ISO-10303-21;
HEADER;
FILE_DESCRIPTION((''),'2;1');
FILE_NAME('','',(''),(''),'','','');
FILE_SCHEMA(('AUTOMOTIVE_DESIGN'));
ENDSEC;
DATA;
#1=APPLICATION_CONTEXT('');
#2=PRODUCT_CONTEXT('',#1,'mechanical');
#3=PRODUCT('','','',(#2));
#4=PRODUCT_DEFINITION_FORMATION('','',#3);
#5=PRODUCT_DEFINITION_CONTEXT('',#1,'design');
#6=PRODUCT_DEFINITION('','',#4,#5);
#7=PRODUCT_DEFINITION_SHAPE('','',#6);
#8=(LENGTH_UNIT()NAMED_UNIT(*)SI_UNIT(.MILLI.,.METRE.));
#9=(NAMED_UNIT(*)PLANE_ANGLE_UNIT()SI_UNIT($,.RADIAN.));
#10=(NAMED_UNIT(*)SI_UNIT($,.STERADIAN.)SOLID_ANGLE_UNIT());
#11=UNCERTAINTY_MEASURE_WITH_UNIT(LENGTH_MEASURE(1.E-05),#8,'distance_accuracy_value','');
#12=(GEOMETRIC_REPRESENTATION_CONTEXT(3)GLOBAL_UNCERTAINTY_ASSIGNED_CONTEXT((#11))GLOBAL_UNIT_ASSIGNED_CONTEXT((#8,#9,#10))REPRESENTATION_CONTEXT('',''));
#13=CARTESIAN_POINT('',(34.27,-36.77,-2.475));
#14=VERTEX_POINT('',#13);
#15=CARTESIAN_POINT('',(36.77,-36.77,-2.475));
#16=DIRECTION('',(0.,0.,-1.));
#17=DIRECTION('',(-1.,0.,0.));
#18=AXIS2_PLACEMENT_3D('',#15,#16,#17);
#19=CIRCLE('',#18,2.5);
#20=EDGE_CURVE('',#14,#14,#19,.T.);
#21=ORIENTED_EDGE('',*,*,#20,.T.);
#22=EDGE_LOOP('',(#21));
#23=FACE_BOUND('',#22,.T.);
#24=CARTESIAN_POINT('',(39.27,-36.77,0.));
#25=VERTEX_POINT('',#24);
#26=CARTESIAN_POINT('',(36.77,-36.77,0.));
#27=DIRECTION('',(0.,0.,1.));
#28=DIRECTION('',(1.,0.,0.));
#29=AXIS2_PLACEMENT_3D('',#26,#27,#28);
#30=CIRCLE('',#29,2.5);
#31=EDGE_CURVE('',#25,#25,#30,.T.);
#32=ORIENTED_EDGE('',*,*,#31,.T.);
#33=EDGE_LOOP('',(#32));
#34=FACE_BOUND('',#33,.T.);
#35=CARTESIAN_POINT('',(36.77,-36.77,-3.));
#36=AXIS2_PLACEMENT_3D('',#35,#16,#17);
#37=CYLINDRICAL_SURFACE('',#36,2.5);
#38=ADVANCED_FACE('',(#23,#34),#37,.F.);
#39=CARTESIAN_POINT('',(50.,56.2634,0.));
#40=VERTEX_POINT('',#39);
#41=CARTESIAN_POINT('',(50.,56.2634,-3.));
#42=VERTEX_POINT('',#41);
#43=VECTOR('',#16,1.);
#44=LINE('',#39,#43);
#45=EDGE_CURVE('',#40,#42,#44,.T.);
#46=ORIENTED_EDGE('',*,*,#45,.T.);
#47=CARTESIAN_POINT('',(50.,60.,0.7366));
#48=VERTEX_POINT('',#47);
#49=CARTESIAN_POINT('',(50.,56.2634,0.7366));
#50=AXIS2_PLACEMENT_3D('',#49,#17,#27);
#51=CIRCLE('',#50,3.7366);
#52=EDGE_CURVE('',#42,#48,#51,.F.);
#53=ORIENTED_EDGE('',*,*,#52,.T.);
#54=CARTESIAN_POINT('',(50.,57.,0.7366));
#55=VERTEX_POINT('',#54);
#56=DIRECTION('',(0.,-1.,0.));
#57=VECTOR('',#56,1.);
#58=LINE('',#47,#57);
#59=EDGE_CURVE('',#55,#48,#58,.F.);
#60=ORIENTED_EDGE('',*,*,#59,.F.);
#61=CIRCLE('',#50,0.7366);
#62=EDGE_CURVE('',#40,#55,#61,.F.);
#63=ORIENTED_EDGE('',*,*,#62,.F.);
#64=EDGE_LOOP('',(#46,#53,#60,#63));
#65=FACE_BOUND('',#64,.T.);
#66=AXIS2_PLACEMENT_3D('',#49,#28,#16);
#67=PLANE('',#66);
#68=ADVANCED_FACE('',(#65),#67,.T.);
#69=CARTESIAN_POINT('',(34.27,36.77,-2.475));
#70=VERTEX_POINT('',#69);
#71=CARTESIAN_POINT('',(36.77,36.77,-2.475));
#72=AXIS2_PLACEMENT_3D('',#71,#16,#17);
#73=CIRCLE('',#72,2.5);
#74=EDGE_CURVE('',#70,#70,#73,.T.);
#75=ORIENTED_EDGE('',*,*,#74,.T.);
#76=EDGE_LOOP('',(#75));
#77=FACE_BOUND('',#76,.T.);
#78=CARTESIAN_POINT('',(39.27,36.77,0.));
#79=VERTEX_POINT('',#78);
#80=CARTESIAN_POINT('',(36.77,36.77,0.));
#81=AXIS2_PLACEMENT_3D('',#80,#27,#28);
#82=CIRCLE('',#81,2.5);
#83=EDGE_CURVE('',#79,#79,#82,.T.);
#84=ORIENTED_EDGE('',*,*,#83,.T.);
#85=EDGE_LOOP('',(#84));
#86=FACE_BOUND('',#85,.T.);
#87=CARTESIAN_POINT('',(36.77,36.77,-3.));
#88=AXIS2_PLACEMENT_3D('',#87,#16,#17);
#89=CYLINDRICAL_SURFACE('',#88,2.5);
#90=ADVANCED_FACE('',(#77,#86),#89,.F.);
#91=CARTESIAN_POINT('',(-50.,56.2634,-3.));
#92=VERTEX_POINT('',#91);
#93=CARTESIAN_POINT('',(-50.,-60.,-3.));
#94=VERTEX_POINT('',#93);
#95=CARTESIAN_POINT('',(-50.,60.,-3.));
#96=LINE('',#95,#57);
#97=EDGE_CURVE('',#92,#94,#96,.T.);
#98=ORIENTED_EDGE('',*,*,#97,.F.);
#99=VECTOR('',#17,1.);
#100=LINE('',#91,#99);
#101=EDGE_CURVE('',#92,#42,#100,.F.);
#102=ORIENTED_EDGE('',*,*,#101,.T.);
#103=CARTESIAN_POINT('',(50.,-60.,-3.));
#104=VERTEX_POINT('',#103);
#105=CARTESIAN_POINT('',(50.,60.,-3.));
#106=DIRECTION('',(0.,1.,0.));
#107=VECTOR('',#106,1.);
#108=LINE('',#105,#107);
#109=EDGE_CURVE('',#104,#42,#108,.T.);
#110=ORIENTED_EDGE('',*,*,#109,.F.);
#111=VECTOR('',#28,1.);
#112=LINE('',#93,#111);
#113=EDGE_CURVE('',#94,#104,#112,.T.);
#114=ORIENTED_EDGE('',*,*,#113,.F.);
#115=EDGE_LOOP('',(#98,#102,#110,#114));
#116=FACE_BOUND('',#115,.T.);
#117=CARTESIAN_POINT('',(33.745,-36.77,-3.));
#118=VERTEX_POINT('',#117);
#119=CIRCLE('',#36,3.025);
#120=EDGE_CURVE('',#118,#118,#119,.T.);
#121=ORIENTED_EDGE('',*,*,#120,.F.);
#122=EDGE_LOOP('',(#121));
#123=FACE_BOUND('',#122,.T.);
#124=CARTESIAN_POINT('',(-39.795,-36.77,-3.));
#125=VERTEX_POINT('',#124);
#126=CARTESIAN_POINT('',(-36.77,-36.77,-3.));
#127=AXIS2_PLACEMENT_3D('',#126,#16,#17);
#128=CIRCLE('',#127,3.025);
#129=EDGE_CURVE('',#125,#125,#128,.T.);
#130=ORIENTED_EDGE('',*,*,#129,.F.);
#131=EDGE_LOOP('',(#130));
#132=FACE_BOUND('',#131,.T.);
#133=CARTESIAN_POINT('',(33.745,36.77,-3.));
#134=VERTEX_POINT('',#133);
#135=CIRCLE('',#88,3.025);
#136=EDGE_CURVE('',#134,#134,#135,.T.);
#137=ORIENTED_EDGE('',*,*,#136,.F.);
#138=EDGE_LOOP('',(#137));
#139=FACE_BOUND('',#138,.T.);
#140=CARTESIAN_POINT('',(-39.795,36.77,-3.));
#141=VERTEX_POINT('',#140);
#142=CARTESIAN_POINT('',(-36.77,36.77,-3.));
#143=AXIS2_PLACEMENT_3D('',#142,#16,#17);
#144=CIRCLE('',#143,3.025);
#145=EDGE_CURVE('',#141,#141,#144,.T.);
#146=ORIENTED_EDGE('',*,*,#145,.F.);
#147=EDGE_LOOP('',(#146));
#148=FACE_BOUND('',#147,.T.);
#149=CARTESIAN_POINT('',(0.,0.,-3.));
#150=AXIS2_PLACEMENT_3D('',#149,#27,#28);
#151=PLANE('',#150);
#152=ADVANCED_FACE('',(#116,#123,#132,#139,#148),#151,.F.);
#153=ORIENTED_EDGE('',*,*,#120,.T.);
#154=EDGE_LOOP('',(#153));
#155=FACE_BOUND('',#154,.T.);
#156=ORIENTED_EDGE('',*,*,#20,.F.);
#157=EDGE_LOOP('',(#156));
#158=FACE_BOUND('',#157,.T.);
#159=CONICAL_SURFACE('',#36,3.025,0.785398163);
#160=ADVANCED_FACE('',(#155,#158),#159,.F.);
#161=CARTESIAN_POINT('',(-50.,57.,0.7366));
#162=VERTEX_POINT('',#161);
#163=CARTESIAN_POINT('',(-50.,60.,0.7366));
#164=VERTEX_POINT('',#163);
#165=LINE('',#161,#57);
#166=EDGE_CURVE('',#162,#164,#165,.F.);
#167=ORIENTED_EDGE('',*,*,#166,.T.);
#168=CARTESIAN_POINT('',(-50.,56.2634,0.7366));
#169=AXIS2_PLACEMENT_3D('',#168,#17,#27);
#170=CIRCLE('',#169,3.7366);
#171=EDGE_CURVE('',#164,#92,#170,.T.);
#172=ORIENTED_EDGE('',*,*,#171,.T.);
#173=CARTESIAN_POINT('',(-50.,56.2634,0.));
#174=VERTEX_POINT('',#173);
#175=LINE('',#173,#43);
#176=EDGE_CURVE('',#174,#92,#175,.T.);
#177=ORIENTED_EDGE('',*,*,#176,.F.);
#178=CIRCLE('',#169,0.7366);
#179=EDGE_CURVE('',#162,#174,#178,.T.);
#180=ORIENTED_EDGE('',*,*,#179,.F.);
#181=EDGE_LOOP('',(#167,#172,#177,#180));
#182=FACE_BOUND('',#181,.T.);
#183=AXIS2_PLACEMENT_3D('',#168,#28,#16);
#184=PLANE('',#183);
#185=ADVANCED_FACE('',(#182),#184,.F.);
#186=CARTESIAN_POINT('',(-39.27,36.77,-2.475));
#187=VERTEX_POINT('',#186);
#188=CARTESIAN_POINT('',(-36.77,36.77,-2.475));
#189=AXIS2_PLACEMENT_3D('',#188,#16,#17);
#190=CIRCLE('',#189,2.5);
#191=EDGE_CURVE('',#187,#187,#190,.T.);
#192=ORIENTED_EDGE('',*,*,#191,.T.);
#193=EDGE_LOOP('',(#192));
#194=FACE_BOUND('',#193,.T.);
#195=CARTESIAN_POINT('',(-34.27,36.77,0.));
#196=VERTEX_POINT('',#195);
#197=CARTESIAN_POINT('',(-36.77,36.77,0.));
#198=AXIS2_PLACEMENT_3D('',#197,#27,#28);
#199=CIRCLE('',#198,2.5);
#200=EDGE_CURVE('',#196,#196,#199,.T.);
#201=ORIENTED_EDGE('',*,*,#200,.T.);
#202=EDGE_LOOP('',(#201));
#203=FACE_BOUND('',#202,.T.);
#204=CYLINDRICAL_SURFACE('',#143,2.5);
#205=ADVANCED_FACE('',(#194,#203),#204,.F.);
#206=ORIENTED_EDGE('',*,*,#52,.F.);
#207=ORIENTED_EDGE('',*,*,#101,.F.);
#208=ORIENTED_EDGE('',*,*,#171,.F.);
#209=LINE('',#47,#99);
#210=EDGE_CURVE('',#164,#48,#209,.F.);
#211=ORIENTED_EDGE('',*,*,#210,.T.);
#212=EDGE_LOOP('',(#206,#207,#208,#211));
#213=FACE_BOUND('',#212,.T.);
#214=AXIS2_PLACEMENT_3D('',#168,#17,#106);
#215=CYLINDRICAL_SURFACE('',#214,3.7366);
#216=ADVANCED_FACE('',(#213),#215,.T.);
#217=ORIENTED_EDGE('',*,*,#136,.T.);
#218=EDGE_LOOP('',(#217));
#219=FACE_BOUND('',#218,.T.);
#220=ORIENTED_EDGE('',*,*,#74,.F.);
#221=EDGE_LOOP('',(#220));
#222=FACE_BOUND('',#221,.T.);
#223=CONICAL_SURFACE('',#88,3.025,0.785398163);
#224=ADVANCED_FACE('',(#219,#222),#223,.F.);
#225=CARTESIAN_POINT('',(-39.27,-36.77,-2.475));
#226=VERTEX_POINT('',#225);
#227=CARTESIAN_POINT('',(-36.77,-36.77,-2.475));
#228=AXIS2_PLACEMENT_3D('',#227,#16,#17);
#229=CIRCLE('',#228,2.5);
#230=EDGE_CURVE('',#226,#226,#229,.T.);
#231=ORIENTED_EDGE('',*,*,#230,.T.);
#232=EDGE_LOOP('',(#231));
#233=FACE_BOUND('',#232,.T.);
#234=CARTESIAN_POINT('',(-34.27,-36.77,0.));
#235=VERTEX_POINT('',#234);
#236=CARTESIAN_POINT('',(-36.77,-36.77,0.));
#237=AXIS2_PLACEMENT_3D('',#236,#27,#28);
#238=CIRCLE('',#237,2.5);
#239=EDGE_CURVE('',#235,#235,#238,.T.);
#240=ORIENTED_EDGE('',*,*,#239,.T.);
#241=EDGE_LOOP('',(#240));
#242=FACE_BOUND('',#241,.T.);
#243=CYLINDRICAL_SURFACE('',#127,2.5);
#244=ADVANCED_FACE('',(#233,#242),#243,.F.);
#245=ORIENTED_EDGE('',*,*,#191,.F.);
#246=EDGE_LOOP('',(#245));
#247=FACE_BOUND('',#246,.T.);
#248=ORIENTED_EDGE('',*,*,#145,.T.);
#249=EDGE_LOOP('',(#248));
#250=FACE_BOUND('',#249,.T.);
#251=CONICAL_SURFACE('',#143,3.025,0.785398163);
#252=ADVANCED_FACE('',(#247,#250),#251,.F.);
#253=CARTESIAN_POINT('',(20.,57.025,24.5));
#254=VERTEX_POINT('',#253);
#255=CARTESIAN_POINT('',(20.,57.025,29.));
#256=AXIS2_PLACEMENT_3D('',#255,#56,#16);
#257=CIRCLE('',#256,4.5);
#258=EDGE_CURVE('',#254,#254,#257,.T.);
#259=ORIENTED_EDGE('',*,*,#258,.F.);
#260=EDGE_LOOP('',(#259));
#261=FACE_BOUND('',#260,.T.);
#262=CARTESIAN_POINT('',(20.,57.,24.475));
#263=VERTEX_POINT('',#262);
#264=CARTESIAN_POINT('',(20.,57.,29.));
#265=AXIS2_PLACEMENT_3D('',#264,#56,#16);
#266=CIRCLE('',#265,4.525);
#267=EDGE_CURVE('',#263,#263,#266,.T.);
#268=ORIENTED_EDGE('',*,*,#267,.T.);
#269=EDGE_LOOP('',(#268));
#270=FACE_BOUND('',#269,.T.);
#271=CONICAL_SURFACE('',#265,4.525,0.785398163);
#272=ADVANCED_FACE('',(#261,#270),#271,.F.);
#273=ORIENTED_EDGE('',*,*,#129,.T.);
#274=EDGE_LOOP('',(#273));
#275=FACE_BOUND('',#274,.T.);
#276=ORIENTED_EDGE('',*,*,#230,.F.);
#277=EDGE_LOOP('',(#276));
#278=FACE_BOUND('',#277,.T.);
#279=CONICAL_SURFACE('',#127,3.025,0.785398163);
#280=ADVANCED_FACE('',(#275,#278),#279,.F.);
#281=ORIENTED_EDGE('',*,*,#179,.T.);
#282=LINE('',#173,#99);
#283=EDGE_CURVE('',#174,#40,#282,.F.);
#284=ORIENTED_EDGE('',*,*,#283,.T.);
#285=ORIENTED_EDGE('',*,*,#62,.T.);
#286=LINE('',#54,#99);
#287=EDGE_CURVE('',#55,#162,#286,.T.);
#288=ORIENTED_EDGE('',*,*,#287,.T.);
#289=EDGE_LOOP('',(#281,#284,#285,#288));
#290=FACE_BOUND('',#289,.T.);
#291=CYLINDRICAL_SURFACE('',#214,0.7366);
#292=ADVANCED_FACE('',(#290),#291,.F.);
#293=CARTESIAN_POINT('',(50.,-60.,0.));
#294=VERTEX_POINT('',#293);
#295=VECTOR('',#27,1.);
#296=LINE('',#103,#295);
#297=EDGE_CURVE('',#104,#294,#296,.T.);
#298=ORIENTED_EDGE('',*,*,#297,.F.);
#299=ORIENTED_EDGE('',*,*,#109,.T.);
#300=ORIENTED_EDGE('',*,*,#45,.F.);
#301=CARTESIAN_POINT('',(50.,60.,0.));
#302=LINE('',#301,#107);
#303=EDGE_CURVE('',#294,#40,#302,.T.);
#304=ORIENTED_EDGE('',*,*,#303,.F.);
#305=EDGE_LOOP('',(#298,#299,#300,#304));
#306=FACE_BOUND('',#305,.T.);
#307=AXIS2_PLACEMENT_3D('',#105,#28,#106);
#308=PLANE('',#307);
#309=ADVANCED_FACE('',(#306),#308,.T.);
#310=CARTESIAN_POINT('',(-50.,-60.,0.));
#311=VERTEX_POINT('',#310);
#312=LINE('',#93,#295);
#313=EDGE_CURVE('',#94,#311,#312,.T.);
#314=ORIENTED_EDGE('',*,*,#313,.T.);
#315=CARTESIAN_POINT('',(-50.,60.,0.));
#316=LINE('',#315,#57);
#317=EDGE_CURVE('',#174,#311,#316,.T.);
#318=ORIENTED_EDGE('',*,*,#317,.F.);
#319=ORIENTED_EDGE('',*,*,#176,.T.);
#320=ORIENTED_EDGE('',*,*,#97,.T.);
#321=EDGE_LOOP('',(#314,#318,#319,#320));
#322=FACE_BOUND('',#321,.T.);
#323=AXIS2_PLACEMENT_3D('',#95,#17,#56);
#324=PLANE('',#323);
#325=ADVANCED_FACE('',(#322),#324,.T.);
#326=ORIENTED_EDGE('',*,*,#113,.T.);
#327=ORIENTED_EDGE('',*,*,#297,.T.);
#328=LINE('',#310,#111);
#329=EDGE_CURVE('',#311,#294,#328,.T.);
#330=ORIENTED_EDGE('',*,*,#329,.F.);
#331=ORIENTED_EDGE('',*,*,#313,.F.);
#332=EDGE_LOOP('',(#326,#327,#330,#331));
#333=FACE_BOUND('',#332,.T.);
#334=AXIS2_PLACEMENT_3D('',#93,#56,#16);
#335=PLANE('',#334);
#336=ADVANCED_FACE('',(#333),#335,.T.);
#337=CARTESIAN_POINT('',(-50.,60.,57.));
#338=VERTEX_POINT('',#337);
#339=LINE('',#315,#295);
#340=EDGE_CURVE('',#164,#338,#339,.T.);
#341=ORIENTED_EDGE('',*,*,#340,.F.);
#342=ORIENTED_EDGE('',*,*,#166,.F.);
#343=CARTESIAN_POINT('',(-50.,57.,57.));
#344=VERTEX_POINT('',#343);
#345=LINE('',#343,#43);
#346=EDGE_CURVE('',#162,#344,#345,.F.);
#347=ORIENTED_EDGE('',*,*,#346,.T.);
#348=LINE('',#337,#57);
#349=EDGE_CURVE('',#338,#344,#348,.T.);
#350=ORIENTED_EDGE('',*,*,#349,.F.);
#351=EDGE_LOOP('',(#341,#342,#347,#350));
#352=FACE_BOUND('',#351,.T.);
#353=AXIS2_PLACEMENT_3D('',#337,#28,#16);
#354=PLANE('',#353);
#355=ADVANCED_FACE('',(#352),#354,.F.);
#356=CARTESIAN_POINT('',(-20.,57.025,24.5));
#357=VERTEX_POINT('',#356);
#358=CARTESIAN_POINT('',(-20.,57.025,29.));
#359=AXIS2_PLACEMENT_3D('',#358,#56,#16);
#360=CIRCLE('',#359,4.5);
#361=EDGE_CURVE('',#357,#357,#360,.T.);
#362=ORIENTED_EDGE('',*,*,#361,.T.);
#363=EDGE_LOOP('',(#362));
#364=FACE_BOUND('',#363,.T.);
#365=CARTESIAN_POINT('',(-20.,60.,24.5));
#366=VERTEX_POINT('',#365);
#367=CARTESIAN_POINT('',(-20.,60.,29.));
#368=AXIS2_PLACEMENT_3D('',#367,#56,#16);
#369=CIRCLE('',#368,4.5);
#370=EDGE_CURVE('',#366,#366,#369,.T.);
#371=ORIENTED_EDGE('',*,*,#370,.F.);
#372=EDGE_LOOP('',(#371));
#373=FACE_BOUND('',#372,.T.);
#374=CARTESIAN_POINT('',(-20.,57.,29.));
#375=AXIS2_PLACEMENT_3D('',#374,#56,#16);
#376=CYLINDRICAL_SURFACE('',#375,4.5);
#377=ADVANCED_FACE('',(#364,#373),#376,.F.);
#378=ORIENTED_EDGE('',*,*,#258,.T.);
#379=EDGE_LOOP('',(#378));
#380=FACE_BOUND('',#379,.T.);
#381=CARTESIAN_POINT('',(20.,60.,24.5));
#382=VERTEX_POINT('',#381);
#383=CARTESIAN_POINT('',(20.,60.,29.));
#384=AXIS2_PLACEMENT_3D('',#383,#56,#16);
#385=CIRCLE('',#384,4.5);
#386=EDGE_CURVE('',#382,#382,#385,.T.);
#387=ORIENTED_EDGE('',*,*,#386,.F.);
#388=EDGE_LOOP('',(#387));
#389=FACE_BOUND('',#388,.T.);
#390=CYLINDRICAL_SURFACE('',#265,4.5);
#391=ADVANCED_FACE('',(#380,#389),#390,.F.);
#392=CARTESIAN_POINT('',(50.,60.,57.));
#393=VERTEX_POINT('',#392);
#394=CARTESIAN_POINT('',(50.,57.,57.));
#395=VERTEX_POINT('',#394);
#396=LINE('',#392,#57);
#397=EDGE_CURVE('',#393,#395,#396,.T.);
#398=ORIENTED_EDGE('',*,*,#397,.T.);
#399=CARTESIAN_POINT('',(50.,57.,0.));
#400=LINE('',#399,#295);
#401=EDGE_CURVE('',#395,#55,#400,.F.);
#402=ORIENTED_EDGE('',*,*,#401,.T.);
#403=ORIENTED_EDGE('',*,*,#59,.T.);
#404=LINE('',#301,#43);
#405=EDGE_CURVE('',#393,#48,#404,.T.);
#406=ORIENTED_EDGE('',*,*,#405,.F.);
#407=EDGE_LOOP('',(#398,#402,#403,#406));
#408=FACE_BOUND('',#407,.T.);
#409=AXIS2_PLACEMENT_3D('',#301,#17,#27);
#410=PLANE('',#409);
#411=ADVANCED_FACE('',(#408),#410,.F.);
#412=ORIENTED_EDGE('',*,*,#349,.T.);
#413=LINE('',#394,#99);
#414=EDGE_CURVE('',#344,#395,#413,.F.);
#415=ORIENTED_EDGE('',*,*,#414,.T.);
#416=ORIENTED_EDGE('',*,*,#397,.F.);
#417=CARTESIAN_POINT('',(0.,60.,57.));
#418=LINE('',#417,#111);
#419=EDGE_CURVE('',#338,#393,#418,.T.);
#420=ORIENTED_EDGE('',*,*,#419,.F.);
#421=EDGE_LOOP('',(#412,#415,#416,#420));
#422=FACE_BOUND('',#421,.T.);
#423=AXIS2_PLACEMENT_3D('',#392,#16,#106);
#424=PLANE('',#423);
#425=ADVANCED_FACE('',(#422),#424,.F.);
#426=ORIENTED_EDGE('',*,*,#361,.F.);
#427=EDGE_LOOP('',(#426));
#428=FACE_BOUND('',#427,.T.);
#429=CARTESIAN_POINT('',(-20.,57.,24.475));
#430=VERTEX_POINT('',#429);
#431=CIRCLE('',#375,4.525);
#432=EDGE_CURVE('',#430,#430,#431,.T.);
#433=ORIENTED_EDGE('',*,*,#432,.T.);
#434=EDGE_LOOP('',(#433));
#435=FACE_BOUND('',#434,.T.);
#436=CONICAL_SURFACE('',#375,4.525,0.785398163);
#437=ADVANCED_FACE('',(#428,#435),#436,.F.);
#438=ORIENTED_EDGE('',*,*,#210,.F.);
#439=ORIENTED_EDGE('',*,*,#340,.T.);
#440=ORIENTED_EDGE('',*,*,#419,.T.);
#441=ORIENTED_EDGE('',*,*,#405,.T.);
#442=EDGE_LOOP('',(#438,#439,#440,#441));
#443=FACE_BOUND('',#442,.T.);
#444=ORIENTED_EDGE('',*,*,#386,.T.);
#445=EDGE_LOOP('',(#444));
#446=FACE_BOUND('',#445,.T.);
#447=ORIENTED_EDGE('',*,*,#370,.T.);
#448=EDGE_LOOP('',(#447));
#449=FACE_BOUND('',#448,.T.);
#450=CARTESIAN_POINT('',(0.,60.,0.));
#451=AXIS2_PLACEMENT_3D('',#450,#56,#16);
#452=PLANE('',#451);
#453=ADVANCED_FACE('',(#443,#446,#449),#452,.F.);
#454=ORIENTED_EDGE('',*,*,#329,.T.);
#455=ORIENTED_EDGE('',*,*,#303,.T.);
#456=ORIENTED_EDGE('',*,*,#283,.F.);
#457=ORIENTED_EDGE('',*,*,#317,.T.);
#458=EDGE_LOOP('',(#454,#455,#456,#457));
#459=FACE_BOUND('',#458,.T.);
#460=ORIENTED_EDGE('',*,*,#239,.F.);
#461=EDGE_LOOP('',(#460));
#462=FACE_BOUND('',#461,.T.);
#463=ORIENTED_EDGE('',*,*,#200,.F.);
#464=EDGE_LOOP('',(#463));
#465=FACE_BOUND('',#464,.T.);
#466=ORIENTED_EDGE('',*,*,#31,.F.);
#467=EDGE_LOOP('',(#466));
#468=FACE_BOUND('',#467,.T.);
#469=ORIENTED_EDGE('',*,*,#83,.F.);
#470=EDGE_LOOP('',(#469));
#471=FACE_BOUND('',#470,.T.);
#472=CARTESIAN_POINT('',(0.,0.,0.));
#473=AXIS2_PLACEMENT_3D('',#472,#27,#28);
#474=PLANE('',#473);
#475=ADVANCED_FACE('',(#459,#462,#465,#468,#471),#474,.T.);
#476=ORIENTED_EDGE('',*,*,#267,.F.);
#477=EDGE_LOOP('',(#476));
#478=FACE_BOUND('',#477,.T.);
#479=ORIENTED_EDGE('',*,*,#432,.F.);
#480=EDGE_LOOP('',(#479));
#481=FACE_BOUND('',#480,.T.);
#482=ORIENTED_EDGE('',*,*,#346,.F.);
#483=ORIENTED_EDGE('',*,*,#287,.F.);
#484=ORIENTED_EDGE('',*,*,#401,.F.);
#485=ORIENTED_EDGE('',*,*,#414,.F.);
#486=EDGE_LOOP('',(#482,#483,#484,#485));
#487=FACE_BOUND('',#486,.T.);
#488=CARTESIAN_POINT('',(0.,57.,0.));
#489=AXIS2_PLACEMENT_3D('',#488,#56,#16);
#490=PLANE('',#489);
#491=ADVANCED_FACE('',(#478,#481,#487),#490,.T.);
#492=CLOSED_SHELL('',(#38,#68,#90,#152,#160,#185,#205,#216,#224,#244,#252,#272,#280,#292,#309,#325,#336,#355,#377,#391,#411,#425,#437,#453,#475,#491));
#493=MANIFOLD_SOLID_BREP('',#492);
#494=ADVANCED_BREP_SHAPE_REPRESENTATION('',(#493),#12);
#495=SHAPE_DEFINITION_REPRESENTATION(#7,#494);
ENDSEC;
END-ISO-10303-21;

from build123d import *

# Parameters (mm, degrees)
SKETCH_1_W                       = 100
SKETCH_1_H                       = 120
SM_BASE_FLANGE_1_DEPTH           = 3
SM_EDGE_FLANGE_1_STRIP_W         = 13.4732
SM_EDGE_FLANGE_1_STRIP_H         = 3
SM_EDGE_FLANGE_1_STRIP_CUT_DEPTH = 100
SM_EDGE_FLANGE_1_DEPTH           = 100
HOLE_WIZARD_M6_2_D               = 5
HOLE_WIZARD_M6_2_DEPTH           = 15
HOLE_WIZARD_M6_2_CSINK_D         = 6.05
HOLE_WIZARD_M6_2_CSINK_ANGLE     = 90
HOLE_WIZARD_M6_2_TIP             = 1.502151548
HOLE_WIZARD_M8_1_D               = 9
HOLE_WIZARD_M8_1_DEPTH           = 15
HOLE_WIZARD_M8_1_CSINK_D         = 9.05
HOLE_WIZARD_M8_1_CSINK_ANGLE     = 90
HOLE_WIZARD_M8_1_TIP             = 2.703872786


# Sheet-metal steps are written as plain solids
with BuildPart() as part:
    # Sketch 1 → 基体-法兰1 (new body)
    with BuildSketch(Plane.XY):
        Rectangle(SKETCH_1_W, SKETCH_1_H)
    extrude(amount=-SM_BASE_FLANGE_1_DEPTH)

    # 边线-法兰1 strip (across the edge) → 边线-法兰1 strip cut (cut)
    with BuildSketch(Plane(origin=(50, 60, 0), x_dir=(0, -1, 0), z_dir=(-1, 0, 0))):
        with Locations((-3, -1.5)):
            Rectangle(SM_EDGE_FLANGE_1_STRIP_W, SM_EDGE_FLANGE_1_STRIP_H)
    extrude(amount=SM_EDGE_FLANGE_1_STRIP_CUT_DEPTH, mode=Mode.SUBTRACT)

    # 边线-法兰1 section (across the edge) → 边线-法兰1 (add)
    with BuildSketch(Plane(origin=(50, 60, 0), x_dir=(0, -1, 0), z_dir=(-1, 0, 0))):
        with BuildLine():
            Line((0, 0.7366), (0, 57))
            Line((0, 57), (3, 57))
            Line((3, 57), (3, 0.7366))
            ThreePointArc((3, 0.7366), (3.215745145, 0.215745145), (3.7366, 0))
            Line((3.7366, 0), (3.7366, -3))
            ThreePointArc((3.7366, -3), (1.094424801, -1.905575199), (0, 0.7366))
        make_face()
    extrude(amount=SM_EDGE_FLANGE_1_DEPTH)

    # M6 螺纹孔2
    with Locations(Plane(origin=(0, 0, -3), x_dir=(-1, 0, 0), z_dir=(0, 0, -1))):
        with Locations((-36.77, 36.77), (36.77, 36.77), (36.77, -36.77), (-36.77, -36.77)):
            CounterSinkHole(HOLE_WIZARD_M6_2_D / 2, HOLE_WIZARD_M6_2_CSINK_D / 2, depth=HOLE_WIZARD_M6_2_DEPTH, counter_sink_angle=HOLE_WIZARD_M6_2_CSINK_ANGLE)
            with Locations((0, 0, -(HOLE_WIZARD_M6_2_DEPTH + HOLE_WIZARD_M6_2_TIP / 2))):  # 118° drill point
                Cone(0, HOLE_WIZARD_M6_2_D / 2, HOLE_WIZARD_M6_2_TIP, mode=Mode.SUBTRACT)

    # M8 间隙孔1
    with Locations(Plane(origin=(0, 57, 0), x_dir=(-1, 0, 0), z_dir=(0, -1, 0))):
        with Locations((20, -29), (-20, -29)):
            CounterSinkHole(HOLE_WIZARD_M8_1_D / 2, HOLE_WIZARD_M8_1_CSINK_D / 2, depth=HOLE_WIZARD_M8_1_DEPTH, counter_sink_angle=HOLE_WIZARD_M8_1_CSINK_ANGLE)
            with Locations((0, 0, -(HOLE_WIZARD_M8_1_DEPTH + HOLE_WIZARD_M8_1_TIP / 2))):  # 118° drill point
                Cone(0, HOLE_WIZARD_M8_1_D / 2, HOLE_WIZARD_M8_1_TIP, mode=Mode.SUBTRACT)


solid = part.part
